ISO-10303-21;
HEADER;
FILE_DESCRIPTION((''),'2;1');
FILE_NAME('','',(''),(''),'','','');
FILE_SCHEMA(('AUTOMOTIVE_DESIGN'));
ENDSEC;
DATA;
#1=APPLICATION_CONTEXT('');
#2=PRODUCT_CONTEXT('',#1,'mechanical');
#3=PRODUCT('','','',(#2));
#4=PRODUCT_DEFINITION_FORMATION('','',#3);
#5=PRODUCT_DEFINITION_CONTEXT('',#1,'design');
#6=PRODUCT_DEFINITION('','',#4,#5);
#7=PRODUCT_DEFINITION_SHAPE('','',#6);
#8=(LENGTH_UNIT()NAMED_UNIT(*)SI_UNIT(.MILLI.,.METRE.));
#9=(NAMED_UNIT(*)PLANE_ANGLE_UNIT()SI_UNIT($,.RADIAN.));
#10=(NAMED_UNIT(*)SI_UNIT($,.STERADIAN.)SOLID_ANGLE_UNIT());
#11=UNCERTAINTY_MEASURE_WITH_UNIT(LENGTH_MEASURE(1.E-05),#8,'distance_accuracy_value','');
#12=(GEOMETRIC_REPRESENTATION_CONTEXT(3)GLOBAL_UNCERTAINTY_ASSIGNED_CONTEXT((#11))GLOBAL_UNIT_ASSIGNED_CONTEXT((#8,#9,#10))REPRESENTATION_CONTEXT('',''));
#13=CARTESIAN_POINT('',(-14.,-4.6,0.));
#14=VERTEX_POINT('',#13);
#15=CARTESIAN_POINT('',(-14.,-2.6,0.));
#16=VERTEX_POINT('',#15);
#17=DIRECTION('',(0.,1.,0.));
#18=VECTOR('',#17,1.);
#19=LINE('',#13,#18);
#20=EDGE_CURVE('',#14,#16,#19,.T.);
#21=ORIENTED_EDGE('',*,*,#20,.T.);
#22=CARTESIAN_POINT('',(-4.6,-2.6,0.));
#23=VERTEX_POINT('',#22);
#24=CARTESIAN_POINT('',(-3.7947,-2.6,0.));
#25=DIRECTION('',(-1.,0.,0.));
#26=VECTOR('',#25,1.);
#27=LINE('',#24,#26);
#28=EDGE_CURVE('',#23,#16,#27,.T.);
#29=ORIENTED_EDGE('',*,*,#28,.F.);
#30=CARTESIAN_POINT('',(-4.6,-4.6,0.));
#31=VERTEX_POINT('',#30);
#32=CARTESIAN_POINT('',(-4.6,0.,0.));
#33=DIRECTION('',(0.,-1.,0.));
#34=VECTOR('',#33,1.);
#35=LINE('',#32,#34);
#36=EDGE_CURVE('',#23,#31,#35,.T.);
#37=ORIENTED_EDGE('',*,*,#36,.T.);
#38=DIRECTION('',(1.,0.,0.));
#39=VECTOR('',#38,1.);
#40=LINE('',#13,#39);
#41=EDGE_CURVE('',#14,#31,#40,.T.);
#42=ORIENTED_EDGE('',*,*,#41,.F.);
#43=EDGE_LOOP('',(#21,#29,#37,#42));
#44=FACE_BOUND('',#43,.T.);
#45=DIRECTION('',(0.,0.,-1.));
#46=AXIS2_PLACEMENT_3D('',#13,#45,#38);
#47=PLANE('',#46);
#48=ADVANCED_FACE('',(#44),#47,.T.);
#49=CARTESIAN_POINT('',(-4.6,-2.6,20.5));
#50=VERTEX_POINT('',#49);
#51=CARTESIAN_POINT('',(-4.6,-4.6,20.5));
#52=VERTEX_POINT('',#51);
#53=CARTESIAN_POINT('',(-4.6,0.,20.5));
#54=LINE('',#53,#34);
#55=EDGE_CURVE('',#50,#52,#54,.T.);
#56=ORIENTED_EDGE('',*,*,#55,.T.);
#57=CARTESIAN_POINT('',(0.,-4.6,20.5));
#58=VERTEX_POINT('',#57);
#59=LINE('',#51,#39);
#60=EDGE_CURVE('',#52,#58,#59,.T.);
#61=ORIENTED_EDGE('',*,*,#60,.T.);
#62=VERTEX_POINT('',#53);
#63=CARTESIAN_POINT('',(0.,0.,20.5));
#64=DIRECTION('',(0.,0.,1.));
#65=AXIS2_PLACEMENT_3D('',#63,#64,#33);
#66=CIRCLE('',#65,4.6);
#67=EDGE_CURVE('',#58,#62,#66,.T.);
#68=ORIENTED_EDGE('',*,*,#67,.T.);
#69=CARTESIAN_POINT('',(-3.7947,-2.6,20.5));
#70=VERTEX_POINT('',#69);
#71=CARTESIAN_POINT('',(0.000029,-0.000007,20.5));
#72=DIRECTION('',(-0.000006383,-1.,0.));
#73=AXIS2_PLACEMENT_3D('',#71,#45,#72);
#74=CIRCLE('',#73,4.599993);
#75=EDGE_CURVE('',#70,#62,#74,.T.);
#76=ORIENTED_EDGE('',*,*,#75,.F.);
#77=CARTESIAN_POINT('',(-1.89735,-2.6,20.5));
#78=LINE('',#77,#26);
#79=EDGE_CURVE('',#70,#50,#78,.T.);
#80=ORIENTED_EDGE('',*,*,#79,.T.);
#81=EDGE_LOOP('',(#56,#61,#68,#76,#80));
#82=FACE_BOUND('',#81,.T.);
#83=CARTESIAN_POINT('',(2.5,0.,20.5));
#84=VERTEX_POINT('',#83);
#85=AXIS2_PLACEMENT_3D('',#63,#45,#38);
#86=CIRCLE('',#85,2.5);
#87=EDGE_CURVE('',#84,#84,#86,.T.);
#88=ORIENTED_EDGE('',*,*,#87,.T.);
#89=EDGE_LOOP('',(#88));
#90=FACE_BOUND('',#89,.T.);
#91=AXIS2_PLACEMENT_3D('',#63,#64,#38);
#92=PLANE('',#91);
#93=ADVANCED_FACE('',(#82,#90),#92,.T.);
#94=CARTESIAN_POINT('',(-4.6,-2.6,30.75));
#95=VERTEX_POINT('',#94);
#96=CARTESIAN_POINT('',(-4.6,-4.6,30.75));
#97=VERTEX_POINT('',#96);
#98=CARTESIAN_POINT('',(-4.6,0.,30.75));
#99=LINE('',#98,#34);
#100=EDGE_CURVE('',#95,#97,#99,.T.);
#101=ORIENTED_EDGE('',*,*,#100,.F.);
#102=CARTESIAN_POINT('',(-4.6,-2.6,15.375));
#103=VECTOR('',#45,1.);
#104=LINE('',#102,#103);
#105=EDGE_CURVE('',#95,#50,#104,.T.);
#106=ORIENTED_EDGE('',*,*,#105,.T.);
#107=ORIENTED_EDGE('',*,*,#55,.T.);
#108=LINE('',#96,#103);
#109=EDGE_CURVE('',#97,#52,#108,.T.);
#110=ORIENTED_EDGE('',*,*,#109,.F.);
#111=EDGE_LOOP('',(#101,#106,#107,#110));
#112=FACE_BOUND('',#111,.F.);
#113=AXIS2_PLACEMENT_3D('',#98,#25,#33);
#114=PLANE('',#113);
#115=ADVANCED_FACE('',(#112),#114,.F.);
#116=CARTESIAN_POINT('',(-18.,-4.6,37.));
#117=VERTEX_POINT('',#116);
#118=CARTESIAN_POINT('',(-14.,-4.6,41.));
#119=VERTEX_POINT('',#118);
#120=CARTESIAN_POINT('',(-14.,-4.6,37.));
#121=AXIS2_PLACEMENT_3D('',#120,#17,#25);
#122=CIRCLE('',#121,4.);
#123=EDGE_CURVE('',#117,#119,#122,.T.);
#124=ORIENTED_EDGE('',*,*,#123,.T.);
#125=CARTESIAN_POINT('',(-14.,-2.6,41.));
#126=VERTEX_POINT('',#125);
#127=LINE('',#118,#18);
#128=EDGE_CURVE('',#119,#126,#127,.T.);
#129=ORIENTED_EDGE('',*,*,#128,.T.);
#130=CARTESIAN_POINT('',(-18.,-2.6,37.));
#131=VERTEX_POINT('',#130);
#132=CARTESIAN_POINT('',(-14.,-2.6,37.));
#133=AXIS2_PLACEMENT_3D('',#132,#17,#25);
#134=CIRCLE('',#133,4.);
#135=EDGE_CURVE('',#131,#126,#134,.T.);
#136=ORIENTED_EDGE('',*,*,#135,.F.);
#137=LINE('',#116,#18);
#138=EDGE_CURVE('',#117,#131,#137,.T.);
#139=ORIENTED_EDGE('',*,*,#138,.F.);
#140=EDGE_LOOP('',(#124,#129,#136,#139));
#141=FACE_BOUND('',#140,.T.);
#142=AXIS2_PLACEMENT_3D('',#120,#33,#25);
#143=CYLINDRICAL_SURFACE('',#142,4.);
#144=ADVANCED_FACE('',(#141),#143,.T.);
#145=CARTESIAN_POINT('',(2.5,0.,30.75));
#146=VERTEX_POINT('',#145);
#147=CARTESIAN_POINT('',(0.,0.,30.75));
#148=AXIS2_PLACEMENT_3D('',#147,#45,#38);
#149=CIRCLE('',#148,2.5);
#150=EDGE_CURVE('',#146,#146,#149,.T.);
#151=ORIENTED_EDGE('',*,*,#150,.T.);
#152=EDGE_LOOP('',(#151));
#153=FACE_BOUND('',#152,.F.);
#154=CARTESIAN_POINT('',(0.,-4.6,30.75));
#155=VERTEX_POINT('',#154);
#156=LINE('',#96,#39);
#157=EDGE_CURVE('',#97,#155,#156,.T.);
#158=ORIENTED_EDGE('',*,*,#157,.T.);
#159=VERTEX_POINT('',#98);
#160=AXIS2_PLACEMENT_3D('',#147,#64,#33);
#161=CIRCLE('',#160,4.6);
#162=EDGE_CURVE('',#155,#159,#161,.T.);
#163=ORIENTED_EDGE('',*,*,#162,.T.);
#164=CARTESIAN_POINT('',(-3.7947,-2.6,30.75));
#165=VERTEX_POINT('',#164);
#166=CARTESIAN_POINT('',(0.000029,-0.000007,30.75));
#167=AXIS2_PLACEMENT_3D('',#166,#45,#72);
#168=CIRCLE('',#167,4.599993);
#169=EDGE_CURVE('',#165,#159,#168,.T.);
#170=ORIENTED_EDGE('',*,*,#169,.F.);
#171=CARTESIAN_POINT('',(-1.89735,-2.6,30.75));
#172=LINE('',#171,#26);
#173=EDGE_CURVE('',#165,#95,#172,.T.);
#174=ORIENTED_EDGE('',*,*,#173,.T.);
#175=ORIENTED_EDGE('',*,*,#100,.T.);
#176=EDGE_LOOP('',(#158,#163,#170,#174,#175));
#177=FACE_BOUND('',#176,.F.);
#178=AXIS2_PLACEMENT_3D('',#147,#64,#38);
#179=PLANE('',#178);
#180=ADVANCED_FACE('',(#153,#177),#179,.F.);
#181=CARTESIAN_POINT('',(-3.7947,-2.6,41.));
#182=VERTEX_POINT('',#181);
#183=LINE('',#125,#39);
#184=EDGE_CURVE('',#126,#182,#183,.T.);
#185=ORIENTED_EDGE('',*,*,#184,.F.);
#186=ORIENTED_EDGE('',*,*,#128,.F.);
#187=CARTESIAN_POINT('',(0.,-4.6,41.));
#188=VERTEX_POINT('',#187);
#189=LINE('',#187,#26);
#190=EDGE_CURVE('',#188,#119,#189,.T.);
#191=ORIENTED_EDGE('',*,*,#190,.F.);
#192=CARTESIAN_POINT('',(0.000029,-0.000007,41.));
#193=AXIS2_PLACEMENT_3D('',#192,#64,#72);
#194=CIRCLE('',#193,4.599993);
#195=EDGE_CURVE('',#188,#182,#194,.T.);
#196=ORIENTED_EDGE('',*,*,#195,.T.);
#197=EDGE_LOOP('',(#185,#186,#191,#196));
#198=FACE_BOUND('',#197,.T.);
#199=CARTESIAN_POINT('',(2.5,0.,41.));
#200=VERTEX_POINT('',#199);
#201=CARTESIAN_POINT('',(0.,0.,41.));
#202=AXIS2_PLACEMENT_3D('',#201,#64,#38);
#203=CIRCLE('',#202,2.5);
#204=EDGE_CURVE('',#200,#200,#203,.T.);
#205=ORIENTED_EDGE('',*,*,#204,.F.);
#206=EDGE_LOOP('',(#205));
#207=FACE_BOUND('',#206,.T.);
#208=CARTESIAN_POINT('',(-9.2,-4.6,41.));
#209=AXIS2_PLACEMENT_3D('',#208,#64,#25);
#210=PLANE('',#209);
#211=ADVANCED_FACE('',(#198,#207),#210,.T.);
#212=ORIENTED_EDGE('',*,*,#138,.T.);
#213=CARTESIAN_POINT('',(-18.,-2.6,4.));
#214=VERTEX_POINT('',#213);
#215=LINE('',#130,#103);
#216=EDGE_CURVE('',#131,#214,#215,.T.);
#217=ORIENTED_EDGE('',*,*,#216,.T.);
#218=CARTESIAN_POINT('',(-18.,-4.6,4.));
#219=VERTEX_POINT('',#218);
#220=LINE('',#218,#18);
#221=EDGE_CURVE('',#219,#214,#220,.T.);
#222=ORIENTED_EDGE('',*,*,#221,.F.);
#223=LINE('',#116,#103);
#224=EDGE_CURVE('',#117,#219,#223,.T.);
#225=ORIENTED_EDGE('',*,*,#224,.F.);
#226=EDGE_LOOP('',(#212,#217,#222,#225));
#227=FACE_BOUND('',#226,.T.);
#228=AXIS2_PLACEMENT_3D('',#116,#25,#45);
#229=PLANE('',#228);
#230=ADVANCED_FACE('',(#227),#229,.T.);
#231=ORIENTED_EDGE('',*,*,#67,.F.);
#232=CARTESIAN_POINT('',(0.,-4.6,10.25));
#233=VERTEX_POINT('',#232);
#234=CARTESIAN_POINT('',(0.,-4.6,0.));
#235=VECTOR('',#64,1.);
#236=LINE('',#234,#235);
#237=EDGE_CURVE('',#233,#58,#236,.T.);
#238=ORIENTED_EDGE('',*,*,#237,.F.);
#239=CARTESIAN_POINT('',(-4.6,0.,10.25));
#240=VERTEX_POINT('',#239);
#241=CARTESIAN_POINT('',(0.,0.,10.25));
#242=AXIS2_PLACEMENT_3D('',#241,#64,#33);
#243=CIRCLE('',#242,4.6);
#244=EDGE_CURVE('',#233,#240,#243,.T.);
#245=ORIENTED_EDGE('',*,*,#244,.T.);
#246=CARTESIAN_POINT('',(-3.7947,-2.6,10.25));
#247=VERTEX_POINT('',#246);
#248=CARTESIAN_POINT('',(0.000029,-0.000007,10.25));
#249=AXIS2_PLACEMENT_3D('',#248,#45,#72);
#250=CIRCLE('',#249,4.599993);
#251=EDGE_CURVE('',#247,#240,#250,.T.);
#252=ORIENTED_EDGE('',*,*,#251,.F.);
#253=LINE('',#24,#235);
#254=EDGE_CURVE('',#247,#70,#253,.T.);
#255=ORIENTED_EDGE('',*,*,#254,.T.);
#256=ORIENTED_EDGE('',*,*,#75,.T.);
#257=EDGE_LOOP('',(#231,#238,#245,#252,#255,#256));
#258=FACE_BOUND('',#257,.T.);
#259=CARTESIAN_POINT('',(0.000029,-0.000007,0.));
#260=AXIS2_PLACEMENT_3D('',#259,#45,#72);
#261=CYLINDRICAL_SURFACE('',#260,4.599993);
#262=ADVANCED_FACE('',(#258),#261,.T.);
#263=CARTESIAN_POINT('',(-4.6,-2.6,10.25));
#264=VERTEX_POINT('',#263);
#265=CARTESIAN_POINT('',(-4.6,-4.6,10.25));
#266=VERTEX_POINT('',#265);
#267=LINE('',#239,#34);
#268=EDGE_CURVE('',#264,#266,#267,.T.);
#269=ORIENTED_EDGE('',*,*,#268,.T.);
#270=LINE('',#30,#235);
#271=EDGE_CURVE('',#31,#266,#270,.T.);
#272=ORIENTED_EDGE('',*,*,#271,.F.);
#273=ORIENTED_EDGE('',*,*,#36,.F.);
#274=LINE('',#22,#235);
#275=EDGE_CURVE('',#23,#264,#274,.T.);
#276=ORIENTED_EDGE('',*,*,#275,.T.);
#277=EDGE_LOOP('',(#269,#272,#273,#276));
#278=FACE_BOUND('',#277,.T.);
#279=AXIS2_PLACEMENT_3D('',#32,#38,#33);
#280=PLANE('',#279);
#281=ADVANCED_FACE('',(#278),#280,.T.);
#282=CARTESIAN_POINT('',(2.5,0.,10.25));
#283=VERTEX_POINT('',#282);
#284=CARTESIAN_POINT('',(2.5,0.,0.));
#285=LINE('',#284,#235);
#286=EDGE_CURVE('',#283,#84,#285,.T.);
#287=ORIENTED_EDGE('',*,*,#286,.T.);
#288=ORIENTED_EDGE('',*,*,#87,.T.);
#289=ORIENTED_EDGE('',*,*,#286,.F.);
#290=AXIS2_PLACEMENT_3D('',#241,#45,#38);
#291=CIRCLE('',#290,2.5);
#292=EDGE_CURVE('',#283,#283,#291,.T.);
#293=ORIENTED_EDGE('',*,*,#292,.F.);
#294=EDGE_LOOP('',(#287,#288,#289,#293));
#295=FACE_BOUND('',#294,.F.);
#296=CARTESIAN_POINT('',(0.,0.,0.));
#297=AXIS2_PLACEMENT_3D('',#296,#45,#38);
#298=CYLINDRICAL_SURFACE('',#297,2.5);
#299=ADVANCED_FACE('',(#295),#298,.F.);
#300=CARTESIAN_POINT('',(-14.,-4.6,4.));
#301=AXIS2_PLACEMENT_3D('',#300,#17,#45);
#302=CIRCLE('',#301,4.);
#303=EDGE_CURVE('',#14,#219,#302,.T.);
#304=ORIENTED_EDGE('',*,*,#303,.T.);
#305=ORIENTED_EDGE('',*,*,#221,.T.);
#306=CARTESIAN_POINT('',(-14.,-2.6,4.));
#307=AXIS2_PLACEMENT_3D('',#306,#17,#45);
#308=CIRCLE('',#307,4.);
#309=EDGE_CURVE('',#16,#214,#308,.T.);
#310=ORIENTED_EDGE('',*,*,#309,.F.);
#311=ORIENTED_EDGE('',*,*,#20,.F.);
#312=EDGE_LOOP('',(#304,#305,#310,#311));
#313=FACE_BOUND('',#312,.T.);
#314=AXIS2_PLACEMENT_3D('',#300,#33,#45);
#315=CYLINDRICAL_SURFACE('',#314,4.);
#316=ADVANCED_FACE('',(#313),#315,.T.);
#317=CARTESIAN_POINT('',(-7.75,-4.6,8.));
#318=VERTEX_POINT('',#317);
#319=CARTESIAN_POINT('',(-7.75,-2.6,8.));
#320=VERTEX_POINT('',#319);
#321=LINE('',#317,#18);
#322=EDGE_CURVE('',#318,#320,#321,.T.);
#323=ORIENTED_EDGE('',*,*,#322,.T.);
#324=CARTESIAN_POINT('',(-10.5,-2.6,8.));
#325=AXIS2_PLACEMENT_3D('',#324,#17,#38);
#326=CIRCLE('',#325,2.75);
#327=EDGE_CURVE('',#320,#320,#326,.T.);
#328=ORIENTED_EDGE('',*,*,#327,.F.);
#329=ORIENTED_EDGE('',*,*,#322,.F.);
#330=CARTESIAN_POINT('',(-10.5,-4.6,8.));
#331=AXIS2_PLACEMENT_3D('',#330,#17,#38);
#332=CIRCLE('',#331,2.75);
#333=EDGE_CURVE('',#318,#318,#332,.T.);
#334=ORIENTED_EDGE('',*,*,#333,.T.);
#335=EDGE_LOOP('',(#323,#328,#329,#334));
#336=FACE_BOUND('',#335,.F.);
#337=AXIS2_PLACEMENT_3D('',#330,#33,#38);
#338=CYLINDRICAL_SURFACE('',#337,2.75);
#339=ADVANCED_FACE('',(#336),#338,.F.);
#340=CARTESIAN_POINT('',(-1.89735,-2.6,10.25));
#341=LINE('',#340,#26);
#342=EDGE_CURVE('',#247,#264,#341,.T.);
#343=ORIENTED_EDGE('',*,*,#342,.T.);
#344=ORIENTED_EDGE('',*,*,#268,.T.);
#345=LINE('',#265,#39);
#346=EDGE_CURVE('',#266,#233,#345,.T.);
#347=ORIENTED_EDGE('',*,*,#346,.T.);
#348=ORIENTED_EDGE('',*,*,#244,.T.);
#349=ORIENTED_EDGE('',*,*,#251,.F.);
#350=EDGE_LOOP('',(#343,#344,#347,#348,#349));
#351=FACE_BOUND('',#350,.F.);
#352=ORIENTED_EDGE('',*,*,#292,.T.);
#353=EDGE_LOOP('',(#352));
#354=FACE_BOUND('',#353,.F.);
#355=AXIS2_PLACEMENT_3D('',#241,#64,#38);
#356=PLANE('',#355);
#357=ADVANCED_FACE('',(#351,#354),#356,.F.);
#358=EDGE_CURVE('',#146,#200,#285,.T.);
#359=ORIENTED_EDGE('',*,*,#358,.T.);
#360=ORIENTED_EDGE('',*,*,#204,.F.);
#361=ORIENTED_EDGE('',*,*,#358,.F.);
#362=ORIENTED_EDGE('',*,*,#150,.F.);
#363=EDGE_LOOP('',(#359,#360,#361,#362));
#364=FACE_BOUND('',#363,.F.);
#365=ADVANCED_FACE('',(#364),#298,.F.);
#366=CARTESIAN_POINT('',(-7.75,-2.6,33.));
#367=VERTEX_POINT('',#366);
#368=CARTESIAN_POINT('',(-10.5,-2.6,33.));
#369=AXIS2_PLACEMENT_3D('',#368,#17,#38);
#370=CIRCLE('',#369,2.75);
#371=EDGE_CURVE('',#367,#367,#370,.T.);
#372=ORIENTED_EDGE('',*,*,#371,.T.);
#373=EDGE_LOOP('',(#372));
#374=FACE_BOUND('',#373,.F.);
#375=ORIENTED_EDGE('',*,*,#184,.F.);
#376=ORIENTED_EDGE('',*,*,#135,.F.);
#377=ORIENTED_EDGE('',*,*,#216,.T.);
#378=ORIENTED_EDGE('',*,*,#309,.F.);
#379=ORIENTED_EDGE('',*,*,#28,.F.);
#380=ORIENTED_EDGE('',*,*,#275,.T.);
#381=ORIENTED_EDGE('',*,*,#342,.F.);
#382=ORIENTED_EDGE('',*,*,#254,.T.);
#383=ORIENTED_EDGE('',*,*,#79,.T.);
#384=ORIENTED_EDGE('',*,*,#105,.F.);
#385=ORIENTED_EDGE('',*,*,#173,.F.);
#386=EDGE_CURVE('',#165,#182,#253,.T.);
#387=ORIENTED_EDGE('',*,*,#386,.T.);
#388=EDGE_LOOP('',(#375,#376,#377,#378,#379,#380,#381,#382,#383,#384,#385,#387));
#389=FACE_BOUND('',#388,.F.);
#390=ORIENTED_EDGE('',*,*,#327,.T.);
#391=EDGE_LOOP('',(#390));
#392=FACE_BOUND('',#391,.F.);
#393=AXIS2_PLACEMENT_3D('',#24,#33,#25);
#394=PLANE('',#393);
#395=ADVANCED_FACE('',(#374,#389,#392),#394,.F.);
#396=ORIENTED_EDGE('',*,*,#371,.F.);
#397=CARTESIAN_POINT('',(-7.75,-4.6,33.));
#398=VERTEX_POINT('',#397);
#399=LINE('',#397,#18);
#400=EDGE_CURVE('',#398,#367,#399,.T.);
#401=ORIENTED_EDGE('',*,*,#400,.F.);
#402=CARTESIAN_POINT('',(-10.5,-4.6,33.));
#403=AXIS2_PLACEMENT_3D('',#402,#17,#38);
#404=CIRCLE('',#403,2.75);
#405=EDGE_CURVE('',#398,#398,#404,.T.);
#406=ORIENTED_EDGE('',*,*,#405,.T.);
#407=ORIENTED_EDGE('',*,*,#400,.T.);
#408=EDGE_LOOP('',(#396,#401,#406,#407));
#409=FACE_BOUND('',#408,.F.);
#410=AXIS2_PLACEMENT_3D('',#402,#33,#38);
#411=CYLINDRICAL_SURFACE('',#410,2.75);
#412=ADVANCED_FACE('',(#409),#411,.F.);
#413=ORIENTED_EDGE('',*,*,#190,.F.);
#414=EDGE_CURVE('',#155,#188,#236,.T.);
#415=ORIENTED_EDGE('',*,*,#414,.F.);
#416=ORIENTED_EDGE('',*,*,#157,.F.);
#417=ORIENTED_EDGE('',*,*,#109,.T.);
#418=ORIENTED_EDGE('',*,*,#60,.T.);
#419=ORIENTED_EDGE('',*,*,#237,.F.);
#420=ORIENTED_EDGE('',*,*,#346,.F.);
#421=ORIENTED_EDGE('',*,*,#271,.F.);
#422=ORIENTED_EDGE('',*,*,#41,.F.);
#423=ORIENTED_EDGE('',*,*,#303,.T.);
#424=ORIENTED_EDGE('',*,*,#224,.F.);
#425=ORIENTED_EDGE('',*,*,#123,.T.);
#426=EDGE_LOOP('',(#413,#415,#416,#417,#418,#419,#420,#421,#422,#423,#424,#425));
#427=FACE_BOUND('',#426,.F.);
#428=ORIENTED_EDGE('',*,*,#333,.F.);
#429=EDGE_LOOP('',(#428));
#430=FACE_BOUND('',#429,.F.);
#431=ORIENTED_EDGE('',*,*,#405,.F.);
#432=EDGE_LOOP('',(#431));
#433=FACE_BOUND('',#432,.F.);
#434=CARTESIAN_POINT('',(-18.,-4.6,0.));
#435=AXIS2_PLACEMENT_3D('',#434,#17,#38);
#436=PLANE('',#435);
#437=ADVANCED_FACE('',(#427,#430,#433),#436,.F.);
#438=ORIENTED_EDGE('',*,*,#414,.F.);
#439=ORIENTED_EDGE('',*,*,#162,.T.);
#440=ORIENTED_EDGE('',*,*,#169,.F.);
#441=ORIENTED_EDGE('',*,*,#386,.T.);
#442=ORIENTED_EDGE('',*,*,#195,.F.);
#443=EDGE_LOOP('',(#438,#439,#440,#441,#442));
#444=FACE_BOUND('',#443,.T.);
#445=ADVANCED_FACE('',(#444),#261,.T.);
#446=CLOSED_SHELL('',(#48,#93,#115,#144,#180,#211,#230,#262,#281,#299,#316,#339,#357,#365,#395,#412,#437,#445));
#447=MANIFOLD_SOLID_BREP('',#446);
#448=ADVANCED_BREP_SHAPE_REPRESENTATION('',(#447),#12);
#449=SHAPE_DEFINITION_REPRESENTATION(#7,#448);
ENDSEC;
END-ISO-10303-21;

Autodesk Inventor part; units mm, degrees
sketch "Sketch_1" plane through (0, 0, 0) normal (0, 0, 1) x (1, 0, 0)
  line L0 (-18, -4.6) -> (0, -4.6)
  arc A0 (0, -4.6) -> (-3.7947, -2.6) centre (0, 0) ccw
  line L1 (-3.7947, -2.6) -> (-18, -2.6)
  line L2 (-18, -2.6) -> (-18, -4.6)
  circle A1 centre (0, 0) radius 2.5
extrude "Extrusion1" add sketch "Sketch_1" along normal blind 41
sketch "Sketch_2" plane through (0, -4.6, 0) normal (0, 1, 0) x (1, 0, 0)
  line L0 (-20, 2) -> (-20, -43)
  line L1 (-20, -43) -> (-9.2, -43)
  line L2 (-9.2, -43) -> (-9.2, -41)
  line L3 (-9.2, -41) -> (-14, -41)
  arc A0 (-18, -37) -> (-14, -41) centre (-14, -37) ccw
  line L4 (-18, -37) -> (-18, -4)
  arc A1 (-14, 0) -> (-18, -4) centre (-14, -4) ccw
  line L5 (-14, 0) -> (-9.2, 0)
  line L6 (-9.2, 0) -> (-9.2, 2)
  line L7 (-9.2, 2) -> (-20, 2)
extrude "Extrusion2" cut sketch "Sketch_2" along normal blind 2
sketch "Sketch_3" plane through (0, -4.6, 0) normal (0, 1, 0) x (1, 0, 0)
  circle A0 centre (-10.5, -33) radius 2.75
extrude "Extrusion3" cut sketch "Sketch_3" along normal blind 2
sketch "Sketch_4" plane through (0, -4.6, 0) normal (0, 1, 0) x (1, 0, 0)
  circle A0 centre (-10.5, -8) radius 2.75
extrude "Extrusion4" cut sketch "Sketch_4" along normal blind 2
sketch "Sketch_7" plane through (0, 0, 0) normal (0, 0, 1) x (1, 0, 0)
  line L0 (-4.6, -4.6) -> (0, -4.6)
  arc A0 (0, -4.6) -> (-4.6, 0) centre (0, 0) ccw
  line L1 (-4.6, 0) -> (-4.6, -4.6)
extrude "Extrusion5" cut sketch "Sketch_7" along normal blind 10.25
sketch "Sketch_5" plane through (0, 0, 30.75) normal (0, 0, 1) x (1, 0, 0)
  line L0 (-4.6, -4.6) -> (0, -4.6)
  arc A0 (0, -4.6) -> (-4.6, 0) centre (0, 0) ccw
  line L1 (-4.6, 0) -> (-4.6, -4.6)
extrude "Extrusion6" cut sketch "Sketch_5" against normal blind 10.25
ref_plane "3_to_1_XY" through (0, 0, 20.5) normal (0, 0, 1) x (1, 0, 0)
ref_plane "3_to_1_YZ" through (0, 0, 20.5) normal (1, 0, 0) x (0, 1, 0)
ref_plane "3_to_1_ZX" through (0, 0, 20.5) normal (0, 1, 0) x (0, 0, 1)
properties part number "SHPSNA5_3"
